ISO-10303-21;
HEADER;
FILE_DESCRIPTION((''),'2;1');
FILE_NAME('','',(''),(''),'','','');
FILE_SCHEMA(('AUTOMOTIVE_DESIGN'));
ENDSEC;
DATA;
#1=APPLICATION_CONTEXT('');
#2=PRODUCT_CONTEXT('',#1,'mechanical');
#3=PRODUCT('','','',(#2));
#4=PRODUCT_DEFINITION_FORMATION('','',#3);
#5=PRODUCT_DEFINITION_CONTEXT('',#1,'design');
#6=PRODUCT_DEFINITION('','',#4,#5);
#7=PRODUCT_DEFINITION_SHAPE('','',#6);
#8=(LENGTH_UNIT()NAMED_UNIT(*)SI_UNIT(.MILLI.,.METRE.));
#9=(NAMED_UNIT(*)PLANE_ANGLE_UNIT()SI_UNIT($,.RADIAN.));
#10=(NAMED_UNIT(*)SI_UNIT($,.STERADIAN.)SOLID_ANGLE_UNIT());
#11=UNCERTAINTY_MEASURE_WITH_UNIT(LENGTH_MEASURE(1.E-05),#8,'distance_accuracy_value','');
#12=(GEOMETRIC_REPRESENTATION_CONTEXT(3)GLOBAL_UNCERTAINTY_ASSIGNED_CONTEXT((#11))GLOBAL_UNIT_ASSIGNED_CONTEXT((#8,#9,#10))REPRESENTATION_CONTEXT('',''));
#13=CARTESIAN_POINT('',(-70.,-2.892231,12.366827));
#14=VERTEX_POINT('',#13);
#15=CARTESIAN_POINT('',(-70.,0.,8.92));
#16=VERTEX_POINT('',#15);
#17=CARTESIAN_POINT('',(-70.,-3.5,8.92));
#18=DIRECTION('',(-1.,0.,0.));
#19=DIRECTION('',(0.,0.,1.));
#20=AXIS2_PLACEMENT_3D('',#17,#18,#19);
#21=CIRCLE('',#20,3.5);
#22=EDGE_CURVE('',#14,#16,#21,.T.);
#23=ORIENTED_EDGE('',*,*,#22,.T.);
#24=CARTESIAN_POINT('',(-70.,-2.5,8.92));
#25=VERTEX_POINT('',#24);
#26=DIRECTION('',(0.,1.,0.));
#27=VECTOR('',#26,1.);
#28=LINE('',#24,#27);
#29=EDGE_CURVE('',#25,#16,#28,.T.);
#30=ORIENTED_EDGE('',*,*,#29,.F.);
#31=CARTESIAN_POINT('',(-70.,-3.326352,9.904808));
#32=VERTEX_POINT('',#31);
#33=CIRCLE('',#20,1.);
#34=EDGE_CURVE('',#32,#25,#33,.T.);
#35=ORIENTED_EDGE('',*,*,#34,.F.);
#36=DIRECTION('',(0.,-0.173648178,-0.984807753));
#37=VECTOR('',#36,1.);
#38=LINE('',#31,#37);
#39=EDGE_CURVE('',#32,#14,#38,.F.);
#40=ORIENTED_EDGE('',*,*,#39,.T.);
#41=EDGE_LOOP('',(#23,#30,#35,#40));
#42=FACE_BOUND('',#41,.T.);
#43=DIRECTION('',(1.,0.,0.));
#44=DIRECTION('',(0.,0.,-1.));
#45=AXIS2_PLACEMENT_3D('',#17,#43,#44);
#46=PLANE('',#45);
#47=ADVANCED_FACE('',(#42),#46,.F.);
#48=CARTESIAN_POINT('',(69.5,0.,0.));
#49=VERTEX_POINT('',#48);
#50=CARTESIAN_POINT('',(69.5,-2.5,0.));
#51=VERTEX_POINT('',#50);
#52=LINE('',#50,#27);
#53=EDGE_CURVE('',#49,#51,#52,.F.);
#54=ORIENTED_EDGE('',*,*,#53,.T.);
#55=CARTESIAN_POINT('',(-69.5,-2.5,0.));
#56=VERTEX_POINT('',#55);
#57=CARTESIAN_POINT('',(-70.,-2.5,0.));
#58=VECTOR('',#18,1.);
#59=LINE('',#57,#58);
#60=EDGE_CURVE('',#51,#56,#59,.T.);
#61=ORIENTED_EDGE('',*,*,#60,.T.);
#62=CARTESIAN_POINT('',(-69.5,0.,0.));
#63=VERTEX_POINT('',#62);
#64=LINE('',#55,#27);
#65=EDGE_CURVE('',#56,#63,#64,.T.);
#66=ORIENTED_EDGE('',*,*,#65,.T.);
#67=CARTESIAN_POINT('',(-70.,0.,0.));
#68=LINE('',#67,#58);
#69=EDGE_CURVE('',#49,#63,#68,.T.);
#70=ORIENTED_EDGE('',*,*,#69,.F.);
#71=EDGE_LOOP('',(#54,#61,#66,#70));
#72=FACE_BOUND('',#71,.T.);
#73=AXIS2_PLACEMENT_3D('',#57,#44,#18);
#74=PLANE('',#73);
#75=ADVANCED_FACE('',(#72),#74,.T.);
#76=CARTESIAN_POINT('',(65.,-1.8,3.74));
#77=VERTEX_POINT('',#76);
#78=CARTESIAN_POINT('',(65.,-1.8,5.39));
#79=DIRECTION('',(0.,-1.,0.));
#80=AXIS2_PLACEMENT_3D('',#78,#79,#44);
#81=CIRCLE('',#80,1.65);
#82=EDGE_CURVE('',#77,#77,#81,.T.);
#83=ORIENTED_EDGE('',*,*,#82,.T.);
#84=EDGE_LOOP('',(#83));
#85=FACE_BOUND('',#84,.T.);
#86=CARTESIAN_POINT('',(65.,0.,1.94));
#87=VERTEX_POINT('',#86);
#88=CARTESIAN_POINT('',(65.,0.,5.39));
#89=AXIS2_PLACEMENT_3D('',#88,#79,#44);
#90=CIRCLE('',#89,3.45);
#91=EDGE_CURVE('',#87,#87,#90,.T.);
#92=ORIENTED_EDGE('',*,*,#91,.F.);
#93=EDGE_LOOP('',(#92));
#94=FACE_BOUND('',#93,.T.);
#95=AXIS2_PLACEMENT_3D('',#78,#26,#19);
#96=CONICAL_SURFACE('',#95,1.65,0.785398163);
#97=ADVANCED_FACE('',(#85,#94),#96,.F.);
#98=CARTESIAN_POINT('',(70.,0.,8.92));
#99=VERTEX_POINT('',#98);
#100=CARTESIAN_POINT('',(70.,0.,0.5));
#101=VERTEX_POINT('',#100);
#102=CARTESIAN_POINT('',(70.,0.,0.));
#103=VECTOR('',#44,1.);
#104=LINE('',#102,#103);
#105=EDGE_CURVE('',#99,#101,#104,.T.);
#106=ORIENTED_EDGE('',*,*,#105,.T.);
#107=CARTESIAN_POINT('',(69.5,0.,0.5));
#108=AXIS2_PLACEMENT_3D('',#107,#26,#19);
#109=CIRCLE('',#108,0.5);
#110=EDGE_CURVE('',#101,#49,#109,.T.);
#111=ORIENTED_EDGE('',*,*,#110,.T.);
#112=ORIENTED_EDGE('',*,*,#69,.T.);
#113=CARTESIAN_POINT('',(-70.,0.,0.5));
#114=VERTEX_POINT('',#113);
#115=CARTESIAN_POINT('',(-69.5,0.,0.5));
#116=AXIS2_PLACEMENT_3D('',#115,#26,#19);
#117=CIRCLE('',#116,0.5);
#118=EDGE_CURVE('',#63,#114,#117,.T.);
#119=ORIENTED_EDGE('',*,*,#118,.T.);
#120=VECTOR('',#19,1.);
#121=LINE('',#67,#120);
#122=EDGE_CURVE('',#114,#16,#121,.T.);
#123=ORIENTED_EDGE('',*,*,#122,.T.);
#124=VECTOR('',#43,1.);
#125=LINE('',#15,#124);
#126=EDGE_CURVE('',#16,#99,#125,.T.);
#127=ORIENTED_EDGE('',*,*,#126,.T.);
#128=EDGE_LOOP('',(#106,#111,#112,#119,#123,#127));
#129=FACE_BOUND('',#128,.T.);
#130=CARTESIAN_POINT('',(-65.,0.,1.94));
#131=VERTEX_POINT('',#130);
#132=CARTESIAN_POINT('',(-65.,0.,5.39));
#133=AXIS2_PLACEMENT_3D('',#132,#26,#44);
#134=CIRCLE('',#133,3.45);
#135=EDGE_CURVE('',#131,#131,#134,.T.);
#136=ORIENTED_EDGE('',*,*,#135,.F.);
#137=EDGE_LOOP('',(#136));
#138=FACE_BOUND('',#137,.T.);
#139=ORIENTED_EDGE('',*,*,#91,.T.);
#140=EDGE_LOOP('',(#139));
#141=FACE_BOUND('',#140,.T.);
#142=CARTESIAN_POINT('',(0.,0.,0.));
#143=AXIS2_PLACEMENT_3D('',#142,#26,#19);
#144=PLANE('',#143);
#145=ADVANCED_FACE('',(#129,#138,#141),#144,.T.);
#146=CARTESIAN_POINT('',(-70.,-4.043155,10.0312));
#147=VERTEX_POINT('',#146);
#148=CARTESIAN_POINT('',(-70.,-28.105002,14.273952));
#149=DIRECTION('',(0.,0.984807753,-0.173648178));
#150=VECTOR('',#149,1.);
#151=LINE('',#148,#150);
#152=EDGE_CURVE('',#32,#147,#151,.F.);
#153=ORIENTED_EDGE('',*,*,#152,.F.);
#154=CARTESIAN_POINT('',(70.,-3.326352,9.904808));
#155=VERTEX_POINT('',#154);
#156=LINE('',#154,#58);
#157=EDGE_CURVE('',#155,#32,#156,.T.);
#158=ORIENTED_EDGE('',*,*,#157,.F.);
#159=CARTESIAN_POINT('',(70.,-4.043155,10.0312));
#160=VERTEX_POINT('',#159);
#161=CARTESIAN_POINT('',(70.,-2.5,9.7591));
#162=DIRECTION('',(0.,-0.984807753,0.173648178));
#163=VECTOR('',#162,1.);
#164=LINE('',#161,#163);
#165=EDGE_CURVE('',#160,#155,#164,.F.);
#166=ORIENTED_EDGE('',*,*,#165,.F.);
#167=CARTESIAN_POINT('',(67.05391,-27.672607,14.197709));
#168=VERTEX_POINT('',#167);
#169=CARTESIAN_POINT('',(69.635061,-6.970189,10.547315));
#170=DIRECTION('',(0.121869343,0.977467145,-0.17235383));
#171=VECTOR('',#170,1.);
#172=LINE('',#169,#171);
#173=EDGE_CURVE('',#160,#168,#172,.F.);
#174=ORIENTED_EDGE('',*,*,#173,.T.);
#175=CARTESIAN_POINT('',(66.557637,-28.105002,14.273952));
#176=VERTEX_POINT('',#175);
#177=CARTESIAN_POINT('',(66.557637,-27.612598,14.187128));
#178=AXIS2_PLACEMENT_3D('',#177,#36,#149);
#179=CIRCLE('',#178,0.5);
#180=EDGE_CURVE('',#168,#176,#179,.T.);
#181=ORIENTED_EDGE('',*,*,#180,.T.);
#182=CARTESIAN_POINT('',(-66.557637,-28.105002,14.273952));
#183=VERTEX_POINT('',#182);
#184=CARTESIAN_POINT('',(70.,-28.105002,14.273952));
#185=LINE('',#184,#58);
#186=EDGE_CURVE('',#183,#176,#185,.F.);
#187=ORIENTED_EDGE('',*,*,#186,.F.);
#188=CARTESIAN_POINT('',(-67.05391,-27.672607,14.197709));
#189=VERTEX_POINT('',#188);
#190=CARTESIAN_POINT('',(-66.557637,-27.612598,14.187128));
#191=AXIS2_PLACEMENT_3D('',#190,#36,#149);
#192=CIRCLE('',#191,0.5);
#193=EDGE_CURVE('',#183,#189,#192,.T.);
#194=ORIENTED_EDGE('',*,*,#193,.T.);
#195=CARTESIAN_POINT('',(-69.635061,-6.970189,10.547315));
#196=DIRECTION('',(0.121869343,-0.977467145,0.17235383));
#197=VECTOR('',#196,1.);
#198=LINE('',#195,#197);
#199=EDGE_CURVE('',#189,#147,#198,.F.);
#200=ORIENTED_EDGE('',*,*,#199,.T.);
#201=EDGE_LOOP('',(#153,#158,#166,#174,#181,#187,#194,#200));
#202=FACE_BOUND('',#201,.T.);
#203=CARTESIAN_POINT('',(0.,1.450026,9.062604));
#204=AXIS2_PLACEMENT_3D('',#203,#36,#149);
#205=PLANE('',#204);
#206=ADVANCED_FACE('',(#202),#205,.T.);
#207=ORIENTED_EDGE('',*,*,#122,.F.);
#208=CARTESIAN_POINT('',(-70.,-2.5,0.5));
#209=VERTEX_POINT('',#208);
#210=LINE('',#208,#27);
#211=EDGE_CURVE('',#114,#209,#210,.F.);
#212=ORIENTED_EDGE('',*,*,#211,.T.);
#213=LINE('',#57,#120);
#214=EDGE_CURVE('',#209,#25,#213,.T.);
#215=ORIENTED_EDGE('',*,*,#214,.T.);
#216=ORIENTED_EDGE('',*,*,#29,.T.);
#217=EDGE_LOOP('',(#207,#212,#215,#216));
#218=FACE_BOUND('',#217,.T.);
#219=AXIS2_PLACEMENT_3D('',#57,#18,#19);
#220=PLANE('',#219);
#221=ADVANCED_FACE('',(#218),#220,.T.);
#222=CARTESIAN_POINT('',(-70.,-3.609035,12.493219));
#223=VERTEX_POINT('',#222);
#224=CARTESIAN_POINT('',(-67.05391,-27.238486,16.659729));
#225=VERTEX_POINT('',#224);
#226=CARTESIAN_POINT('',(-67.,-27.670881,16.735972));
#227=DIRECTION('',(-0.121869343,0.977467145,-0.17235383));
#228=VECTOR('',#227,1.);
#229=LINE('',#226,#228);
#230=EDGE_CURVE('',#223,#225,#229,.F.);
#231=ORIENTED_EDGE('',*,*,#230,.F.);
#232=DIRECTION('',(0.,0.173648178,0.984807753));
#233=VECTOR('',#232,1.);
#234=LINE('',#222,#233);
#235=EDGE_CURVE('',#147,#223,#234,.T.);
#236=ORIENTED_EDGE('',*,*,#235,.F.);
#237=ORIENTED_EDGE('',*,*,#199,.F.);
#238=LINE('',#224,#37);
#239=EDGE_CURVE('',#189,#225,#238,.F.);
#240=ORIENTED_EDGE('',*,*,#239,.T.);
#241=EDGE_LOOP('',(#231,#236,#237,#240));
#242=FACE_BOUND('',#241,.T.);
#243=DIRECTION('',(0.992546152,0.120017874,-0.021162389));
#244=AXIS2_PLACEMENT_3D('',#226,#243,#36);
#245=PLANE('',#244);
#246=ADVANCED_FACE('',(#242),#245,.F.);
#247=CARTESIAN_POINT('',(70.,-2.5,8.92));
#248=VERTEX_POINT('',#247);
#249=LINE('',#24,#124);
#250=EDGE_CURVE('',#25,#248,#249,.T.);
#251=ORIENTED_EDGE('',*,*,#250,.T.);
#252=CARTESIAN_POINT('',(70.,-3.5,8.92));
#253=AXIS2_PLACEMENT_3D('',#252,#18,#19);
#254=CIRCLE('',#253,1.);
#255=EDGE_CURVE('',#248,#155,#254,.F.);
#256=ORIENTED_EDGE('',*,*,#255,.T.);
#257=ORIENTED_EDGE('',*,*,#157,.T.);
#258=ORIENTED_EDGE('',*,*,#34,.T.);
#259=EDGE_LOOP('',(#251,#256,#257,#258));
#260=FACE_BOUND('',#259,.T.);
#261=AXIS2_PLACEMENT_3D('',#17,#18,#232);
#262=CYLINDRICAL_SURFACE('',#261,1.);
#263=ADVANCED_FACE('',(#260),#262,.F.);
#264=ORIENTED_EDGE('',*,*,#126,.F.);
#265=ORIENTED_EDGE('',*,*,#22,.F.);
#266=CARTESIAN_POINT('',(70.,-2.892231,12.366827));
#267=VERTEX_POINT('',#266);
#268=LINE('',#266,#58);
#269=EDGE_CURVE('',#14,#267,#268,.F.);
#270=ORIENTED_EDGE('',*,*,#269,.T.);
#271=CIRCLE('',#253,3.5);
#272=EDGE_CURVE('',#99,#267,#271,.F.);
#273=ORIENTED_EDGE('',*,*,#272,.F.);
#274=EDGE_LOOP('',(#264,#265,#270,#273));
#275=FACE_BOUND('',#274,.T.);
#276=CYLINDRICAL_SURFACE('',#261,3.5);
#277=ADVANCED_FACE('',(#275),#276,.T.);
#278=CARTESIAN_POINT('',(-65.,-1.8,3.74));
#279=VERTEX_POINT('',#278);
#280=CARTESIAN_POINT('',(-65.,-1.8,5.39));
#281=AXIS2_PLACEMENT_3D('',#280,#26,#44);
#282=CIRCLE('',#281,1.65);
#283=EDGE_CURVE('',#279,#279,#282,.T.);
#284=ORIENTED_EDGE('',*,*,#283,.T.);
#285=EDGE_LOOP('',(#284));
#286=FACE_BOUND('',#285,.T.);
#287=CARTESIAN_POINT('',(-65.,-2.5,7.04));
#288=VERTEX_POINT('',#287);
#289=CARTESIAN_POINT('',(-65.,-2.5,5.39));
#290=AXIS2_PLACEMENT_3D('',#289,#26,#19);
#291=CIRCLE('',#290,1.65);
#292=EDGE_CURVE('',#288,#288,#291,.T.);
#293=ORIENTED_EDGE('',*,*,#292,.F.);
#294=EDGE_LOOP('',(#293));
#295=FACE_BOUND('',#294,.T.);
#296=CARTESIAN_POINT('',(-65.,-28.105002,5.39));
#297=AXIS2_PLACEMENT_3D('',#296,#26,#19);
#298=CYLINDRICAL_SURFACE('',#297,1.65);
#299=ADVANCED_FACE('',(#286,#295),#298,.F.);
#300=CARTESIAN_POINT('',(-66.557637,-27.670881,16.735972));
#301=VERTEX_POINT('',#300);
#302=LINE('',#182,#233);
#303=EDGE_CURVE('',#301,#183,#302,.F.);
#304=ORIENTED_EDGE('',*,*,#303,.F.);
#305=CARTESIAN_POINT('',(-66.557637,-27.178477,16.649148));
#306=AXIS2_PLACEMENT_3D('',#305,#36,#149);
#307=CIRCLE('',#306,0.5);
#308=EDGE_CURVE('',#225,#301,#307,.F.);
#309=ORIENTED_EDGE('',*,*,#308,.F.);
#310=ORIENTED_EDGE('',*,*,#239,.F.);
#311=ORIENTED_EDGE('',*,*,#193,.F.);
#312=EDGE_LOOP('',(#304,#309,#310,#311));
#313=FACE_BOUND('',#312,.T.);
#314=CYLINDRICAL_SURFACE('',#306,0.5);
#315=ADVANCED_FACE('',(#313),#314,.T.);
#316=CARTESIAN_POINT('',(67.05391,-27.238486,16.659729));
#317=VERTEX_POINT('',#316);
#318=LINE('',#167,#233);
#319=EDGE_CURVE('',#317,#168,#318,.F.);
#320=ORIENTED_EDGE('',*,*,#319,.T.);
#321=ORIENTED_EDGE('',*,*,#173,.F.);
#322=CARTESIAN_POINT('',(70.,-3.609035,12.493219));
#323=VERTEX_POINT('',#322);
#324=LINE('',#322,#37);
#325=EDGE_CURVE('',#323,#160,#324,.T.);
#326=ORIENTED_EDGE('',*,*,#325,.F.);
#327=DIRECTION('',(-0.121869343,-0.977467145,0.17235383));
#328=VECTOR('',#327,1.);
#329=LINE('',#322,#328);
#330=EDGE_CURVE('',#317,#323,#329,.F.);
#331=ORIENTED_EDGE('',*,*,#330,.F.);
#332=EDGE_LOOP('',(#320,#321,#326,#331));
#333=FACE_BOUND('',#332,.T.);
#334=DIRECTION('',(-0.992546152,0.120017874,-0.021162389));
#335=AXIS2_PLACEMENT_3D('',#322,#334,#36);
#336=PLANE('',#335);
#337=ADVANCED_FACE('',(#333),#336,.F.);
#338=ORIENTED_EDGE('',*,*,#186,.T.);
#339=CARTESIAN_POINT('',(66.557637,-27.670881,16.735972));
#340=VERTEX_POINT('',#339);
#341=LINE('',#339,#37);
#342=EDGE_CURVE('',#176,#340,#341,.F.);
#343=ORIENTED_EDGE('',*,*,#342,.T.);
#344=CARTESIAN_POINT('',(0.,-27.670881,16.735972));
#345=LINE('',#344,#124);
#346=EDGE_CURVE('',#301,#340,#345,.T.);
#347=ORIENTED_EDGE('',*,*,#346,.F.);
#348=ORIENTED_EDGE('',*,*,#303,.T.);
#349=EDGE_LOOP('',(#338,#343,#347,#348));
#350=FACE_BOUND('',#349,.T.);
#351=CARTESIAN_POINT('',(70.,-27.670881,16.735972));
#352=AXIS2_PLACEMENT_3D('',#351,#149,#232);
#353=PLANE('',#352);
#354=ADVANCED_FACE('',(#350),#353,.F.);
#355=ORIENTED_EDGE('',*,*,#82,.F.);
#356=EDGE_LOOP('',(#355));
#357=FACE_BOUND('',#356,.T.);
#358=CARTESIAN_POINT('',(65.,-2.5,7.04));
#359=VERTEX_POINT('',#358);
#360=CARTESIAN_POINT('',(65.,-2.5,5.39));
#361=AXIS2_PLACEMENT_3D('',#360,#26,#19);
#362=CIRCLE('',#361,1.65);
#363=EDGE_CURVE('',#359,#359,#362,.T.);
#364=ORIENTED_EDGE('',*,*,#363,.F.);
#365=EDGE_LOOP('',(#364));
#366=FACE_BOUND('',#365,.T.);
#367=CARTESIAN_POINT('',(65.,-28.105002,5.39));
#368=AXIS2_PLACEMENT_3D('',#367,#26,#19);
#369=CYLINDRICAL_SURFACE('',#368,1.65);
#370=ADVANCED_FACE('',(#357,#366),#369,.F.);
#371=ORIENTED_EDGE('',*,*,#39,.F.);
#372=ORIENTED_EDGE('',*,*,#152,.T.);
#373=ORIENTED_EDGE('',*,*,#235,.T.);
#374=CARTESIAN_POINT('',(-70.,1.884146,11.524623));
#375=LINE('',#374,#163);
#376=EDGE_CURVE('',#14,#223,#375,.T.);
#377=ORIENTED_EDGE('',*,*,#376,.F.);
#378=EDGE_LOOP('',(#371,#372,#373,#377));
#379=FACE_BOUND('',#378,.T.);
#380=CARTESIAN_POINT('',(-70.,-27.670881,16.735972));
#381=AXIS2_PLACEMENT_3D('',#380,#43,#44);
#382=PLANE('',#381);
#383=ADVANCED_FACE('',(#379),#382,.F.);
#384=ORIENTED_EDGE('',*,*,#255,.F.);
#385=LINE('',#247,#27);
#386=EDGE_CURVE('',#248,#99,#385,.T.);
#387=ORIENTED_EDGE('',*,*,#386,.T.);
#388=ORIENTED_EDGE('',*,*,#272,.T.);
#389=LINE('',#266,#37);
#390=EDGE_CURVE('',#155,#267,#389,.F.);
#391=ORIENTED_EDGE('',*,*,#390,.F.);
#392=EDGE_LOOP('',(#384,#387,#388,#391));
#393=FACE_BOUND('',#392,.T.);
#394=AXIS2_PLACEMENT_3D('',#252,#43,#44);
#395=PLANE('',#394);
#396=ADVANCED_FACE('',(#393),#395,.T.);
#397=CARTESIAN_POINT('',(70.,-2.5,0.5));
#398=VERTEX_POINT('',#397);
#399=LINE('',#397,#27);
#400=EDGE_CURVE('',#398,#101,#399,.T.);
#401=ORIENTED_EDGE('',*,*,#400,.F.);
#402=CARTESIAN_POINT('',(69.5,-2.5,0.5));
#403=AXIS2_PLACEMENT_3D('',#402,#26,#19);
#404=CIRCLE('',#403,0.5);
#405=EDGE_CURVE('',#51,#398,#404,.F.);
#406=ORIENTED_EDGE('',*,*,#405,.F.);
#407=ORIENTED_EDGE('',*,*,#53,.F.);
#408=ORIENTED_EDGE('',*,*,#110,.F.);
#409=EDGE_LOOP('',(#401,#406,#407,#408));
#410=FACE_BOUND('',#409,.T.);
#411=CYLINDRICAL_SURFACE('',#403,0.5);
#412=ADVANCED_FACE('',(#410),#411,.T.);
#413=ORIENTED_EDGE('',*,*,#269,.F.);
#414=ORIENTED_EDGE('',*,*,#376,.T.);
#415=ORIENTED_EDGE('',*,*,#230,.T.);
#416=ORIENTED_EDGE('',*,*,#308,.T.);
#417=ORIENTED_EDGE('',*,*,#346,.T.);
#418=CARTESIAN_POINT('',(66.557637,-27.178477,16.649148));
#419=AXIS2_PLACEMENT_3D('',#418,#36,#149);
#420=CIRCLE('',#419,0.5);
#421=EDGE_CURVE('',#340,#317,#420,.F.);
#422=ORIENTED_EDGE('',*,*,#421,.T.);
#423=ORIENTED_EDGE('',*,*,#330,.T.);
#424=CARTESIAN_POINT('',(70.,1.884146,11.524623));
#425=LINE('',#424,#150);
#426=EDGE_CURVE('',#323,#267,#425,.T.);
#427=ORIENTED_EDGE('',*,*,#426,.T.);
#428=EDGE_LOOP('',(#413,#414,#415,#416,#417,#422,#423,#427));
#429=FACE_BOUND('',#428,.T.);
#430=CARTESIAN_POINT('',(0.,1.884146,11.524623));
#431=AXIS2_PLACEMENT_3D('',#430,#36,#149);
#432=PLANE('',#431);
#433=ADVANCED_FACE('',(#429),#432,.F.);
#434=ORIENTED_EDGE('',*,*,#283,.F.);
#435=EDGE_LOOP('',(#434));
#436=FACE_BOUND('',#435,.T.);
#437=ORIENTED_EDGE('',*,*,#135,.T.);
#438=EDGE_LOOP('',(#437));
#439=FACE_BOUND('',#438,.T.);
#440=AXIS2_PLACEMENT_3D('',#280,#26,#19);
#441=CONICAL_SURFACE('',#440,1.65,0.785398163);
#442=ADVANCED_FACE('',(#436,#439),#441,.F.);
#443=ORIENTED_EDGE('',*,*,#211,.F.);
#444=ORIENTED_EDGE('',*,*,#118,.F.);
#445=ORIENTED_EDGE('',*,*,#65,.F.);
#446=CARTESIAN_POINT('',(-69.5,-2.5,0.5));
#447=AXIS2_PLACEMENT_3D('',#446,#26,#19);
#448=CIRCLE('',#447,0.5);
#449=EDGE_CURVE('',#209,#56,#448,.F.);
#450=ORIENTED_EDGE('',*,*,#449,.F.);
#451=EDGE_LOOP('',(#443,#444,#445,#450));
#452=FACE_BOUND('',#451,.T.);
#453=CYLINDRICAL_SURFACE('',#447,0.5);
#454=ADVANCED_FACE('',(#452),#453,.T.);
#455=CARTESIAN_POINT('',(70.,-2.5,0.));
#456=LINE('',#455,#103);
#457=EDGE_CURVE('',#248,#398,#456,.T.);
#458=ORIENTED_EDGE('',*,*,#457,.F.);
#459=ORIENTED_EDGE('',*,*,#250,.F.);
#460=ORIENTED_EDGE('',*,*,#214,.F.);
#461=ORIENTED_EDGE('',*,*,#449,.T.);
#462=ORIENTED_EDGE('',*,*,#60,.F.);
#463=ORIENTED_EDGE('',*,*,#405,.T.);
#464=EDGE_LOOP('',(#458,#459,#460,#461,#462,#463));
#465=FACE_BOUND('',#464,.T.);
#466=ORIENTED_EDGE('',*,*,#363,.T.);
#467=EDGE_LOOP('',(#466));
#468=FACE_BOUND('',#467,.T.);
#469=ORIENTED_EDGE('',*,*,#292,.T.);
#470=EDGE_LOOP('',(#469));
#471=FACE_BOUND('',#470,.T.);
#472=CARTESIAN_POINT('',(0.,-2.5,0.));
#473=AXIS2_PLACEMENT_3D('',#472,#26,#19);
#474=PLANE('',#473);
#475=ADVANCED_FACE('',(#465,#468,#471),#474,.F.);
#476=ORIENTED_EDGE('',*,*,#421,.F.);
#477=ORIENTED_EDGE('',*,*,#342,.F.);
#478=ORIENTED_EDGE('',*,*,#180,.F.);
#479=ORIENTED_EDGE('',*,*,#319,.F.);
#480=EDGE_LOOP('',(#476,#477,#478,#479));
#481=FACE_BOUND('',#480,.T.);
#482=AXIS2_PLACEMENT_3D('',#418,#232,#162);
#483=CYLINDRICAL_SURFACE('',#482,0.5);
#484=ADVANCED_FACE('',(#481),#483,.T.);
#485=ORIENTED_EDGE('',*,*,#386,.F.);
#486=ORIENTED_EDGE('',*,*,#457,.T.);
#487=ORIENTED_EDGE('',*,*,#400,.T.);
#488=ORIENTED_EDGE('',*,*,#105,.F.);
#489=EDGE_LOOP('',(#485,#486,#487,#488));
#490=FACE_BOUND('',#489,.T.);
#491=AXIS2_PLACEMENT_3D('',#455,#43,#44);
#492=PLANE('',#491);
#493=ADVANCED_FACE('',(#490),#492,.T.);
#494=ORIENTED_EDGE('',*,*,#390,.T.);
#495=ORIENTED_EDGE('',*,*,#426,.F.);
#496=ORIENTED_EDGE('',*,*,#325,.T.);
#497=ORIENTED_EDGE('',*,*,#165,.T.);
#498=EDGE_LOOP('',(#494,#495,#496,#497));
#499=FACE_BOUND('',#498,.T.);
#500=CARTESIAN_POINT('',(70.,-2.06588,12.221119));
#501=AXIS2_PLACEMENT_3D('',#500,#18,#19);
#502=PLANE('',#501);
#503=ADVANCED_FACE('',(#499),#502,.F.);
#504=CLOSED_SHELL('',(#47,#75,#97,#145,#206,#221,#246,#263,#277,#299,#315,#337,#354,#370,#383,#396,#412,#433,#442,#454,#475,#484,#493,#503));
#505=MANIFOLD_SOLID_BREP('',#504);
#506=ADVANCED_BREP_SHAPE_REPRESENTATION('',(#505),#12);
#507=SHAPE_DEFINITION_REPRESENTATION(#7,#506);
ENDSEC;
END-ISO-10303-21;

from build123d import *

# Parameters (mm, degrees)
SKETCH1_W          = 140
SKETCH1_H          = 8.92
BASE_FLANGE1_DEPTH = 2.5
EDGE_FLANGE1_DEPTH = 140
SKETCH21_R         = 1.65
CUT_EXTRUDE1_DEPTH = 78.265670645
CHAMFER1_SIZE      = 3
CHAMFER1_SIZE2     = 24.433039284
FILLET1_R          = 0.5


# Sheet-metal steps are written as plain solids
with BuildPart() as part:
    # Sketch1 → Base-Flange1 (new body)
    with BuildSketch(Plane(origin=(0, 0, 0), x_dir=(1, 0, 0), z_dir=(0, 1, 0))):
        with Locations((0, -4.46)):
            Rectangle(SKETCH1_W, SKETCH1_H)
    extrude(amount=-BASE_FLANGE1_DEPTH)

    # Edge-Flange1 section (across the edge) → Edge-Flange1 (add)
    with BuildSketch(Plane(origin=(70, -2.5, 9.759099631), x_dir=(0, -0.17364817766693427, -0.9848077530122075), z_dir=(-1, 0, 0))):
        with BuildLine():
            Line((-2.5, 0.839099631), (-2.5, 26))
            Line((-2.5, 26), (0, 26))
            Line((0, 26), (0, 0.839099631))
            ThreePointArc((0, 0.839099631), (0.233955557, 0.196312021), (0.826351822, -0.145708122))
            Line((0.826351822, -0.145708122), (0.392231378, -2.607727504))
            ThreePointArc((0.392231378, -2.607727504), (-1.681155551, -1.410657003), (-2.5, 0.839099631))
        make_face()
    extrude(amount=EDGE_FLANGE1_DEPTH)

    # Sketch21 → Cut-Extrude1 (cut, through all)
    with BuildSketch(Plane(origin=(0, 0, 0), x_dir=(1, 0, 0), z_dir=(0, 1, 0))):
        with Locations(Location((-65, -5.39, 0), (0, 0, 270))):
            Circle(SKETCH21_R)
        with Locations(Location((65, -5.39, 0), (0, 0, 270))):
            Circle(SKETCH21_R)
    extrude(amount=-CUT_EXTRUDE1_DEPTH, mode=Mode.SUBTRACT)

    # Sketch24 → Cut-Revolve2 (revolve, cut)
    with BuildSketch(Plane(origin=(65, 0, 0), x_dir=(0, 0, -1), z_dir=(1, 0, 0)), mode=Mode.PRIVATE) as cut_revolve2_sk:
        Polygon((-5.39, 0), (-5.39, -1.8), (-3.74, -1.8), (-1.94, 0), align=None)
    cut_revolve2 = revolve(cut_revolve2_sk.sketch.rotate(Axis((65, 0, 5.39), (0, 1, 0)), 180), axis=Axis((65, 0, 5.39), (0, 1, 0)), mode=Mode.SUBTRACT)

    # Mirror2: Cut-Revolve2 across plane
    add(cut_revolve2.mirror(Plane(origin=(0, 0, 0), x_dir=(0, 0, 1), z_dir=(1, 0, 0))), mode=Mode.SUBTRACT)

    # Chamfer1
    chamfer1_edges = [part.edges().sort_by_distance(p)[0] for p in [
        (70, -27.887941356, 15.504961942),
        (-70, -27.887941356, 15.504961942),
    ]]
    chamfer1_side = [part.faces().sort_by_distance(p)[0] for p in [
        (0, -27.887941356, 15.504961942),
    ]]
    chamfer(chamfer1_edges, length=CHAMFER1_SIZE, length2=CHAMFER1_SIZE2, reference=chamfer1_side[0])

    # Fillet1
    fillet1_edges = [part.edges().sort_by_distance(p)[0] for p in [
        (67, -27.887941356, 15.504961942),
        (-67, -27.887941356, 15.504961942),
        (-70, -1.25, 0),
        (70, -1.25, 0),
    ]]
    fillet(fillet1_edges, radius=FILLET1_R)


solid = part.part
